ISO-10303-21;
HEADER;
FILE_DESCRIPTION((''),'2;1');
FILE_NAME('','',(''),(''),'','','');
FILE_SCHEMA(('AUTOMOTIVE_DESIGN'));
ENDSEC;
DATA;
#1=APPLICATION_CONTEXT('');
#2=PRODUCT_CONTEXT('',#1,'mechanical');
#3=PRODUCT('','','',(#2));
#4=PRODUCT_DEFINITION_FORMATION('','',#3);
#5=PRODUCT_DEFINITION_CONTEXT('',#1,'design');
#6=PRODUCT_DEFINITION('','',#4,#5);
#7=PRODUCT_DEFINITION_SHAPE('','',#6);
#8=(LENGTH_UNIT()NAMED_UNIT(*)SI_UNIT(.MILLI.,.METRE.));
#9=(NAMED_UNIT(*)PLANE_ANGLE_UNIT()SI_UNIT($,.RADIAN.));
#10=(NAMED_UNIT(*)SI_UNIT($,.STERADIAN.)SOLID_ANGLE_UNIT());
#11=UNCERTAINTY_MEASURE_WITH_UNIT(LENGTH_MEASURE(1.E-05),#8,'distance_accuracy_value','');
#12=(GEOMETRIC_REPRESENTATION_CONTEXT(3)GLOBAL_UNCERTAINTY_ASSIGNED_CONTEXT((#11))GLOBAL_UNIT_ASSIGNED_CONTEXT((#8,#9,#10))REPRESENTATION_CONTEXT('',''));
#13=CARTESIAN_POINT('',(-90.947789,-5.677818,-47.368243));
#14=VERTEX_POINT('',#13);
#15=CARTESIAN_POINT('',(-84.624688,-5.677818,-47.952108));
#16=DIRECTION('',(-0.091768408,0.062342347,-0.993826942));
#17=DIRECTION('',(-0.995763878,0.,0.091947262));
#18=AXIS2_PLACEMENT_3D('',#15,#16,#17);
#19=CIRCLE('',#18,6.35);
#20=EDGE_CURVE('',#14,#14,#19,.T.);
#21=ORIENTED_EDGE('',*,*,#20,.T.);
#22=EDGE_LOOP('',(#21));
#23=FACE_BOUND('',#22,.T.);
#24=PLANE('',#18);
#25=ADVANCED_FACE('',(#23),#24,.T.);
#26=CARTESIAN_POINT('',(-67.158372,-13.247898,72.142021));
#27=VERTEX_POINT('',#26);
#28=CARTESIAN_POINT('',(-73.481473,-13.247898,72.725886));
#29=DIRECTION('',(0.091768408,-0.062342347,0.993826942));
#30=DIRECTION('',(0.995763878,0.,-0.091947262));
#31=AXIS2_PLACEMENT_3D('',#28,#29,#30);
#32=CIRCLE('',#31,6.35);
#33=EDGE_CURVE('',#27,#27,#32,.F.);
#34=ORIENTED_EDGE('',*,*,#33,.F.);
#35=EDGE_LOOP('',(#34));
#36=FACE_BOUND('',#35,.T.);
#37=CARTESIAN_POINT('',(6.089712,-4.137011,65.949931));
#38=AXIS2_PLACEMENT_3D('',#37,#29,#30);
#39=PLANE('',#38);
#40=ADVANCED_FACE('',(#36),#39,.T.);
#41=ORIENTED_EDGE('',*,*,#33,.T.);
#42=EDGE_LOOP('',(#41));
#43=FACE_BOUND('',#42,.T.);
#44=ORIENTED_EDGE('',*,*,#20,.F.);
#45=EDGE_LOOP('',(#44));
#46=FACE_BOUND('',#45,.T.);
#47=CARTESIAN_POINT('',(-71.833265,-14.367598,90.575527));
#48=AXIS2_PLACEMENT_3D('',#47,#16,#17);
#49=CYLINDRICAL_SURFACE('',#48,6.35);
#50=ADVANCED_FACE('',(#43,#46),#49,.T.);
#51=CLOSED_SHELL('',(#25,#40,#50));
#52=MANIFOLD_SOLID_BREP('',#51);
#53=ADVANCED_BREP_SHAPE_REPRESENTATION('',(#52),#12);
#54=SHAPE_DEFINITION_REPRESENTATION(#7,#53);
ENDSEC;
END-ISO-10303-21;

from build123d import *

# Parameters (mm, degrees)
BOSS_EXTRUDE1_START     = -121.427573334
BOSS_EXTRUDE1_OUTLINE_R = 6.35
BOSS_EXTRUDE1_DEPTH     = 121.427573334


# Read off the part's stored shape, not the designer's step: Boss-Extrude1
with BuildPart() as part:
    # Boss-Extrude1 outline → Boss-Extrude1 (new body)
    with BuildSketch(Plane(origin=(-5.053502813, 3.433068434, -54.728063299), x_dir=(-0.9957762428877978, -0.002869385405095792, 0.09176840811335334), z_dir=(-0.09176840811335332, 0.06234234684769221, -0.9938269422096904)).offset(BOSS_EXTRUDE1_START)):
        with Locations((79.883057054, -8.899018068)):
            Circle(BOSS_EXTRUDE1_OUTLINE_R)
    extrude(amount=BOSS_EXTRUDE1_DEPTH)


solid = part.part
